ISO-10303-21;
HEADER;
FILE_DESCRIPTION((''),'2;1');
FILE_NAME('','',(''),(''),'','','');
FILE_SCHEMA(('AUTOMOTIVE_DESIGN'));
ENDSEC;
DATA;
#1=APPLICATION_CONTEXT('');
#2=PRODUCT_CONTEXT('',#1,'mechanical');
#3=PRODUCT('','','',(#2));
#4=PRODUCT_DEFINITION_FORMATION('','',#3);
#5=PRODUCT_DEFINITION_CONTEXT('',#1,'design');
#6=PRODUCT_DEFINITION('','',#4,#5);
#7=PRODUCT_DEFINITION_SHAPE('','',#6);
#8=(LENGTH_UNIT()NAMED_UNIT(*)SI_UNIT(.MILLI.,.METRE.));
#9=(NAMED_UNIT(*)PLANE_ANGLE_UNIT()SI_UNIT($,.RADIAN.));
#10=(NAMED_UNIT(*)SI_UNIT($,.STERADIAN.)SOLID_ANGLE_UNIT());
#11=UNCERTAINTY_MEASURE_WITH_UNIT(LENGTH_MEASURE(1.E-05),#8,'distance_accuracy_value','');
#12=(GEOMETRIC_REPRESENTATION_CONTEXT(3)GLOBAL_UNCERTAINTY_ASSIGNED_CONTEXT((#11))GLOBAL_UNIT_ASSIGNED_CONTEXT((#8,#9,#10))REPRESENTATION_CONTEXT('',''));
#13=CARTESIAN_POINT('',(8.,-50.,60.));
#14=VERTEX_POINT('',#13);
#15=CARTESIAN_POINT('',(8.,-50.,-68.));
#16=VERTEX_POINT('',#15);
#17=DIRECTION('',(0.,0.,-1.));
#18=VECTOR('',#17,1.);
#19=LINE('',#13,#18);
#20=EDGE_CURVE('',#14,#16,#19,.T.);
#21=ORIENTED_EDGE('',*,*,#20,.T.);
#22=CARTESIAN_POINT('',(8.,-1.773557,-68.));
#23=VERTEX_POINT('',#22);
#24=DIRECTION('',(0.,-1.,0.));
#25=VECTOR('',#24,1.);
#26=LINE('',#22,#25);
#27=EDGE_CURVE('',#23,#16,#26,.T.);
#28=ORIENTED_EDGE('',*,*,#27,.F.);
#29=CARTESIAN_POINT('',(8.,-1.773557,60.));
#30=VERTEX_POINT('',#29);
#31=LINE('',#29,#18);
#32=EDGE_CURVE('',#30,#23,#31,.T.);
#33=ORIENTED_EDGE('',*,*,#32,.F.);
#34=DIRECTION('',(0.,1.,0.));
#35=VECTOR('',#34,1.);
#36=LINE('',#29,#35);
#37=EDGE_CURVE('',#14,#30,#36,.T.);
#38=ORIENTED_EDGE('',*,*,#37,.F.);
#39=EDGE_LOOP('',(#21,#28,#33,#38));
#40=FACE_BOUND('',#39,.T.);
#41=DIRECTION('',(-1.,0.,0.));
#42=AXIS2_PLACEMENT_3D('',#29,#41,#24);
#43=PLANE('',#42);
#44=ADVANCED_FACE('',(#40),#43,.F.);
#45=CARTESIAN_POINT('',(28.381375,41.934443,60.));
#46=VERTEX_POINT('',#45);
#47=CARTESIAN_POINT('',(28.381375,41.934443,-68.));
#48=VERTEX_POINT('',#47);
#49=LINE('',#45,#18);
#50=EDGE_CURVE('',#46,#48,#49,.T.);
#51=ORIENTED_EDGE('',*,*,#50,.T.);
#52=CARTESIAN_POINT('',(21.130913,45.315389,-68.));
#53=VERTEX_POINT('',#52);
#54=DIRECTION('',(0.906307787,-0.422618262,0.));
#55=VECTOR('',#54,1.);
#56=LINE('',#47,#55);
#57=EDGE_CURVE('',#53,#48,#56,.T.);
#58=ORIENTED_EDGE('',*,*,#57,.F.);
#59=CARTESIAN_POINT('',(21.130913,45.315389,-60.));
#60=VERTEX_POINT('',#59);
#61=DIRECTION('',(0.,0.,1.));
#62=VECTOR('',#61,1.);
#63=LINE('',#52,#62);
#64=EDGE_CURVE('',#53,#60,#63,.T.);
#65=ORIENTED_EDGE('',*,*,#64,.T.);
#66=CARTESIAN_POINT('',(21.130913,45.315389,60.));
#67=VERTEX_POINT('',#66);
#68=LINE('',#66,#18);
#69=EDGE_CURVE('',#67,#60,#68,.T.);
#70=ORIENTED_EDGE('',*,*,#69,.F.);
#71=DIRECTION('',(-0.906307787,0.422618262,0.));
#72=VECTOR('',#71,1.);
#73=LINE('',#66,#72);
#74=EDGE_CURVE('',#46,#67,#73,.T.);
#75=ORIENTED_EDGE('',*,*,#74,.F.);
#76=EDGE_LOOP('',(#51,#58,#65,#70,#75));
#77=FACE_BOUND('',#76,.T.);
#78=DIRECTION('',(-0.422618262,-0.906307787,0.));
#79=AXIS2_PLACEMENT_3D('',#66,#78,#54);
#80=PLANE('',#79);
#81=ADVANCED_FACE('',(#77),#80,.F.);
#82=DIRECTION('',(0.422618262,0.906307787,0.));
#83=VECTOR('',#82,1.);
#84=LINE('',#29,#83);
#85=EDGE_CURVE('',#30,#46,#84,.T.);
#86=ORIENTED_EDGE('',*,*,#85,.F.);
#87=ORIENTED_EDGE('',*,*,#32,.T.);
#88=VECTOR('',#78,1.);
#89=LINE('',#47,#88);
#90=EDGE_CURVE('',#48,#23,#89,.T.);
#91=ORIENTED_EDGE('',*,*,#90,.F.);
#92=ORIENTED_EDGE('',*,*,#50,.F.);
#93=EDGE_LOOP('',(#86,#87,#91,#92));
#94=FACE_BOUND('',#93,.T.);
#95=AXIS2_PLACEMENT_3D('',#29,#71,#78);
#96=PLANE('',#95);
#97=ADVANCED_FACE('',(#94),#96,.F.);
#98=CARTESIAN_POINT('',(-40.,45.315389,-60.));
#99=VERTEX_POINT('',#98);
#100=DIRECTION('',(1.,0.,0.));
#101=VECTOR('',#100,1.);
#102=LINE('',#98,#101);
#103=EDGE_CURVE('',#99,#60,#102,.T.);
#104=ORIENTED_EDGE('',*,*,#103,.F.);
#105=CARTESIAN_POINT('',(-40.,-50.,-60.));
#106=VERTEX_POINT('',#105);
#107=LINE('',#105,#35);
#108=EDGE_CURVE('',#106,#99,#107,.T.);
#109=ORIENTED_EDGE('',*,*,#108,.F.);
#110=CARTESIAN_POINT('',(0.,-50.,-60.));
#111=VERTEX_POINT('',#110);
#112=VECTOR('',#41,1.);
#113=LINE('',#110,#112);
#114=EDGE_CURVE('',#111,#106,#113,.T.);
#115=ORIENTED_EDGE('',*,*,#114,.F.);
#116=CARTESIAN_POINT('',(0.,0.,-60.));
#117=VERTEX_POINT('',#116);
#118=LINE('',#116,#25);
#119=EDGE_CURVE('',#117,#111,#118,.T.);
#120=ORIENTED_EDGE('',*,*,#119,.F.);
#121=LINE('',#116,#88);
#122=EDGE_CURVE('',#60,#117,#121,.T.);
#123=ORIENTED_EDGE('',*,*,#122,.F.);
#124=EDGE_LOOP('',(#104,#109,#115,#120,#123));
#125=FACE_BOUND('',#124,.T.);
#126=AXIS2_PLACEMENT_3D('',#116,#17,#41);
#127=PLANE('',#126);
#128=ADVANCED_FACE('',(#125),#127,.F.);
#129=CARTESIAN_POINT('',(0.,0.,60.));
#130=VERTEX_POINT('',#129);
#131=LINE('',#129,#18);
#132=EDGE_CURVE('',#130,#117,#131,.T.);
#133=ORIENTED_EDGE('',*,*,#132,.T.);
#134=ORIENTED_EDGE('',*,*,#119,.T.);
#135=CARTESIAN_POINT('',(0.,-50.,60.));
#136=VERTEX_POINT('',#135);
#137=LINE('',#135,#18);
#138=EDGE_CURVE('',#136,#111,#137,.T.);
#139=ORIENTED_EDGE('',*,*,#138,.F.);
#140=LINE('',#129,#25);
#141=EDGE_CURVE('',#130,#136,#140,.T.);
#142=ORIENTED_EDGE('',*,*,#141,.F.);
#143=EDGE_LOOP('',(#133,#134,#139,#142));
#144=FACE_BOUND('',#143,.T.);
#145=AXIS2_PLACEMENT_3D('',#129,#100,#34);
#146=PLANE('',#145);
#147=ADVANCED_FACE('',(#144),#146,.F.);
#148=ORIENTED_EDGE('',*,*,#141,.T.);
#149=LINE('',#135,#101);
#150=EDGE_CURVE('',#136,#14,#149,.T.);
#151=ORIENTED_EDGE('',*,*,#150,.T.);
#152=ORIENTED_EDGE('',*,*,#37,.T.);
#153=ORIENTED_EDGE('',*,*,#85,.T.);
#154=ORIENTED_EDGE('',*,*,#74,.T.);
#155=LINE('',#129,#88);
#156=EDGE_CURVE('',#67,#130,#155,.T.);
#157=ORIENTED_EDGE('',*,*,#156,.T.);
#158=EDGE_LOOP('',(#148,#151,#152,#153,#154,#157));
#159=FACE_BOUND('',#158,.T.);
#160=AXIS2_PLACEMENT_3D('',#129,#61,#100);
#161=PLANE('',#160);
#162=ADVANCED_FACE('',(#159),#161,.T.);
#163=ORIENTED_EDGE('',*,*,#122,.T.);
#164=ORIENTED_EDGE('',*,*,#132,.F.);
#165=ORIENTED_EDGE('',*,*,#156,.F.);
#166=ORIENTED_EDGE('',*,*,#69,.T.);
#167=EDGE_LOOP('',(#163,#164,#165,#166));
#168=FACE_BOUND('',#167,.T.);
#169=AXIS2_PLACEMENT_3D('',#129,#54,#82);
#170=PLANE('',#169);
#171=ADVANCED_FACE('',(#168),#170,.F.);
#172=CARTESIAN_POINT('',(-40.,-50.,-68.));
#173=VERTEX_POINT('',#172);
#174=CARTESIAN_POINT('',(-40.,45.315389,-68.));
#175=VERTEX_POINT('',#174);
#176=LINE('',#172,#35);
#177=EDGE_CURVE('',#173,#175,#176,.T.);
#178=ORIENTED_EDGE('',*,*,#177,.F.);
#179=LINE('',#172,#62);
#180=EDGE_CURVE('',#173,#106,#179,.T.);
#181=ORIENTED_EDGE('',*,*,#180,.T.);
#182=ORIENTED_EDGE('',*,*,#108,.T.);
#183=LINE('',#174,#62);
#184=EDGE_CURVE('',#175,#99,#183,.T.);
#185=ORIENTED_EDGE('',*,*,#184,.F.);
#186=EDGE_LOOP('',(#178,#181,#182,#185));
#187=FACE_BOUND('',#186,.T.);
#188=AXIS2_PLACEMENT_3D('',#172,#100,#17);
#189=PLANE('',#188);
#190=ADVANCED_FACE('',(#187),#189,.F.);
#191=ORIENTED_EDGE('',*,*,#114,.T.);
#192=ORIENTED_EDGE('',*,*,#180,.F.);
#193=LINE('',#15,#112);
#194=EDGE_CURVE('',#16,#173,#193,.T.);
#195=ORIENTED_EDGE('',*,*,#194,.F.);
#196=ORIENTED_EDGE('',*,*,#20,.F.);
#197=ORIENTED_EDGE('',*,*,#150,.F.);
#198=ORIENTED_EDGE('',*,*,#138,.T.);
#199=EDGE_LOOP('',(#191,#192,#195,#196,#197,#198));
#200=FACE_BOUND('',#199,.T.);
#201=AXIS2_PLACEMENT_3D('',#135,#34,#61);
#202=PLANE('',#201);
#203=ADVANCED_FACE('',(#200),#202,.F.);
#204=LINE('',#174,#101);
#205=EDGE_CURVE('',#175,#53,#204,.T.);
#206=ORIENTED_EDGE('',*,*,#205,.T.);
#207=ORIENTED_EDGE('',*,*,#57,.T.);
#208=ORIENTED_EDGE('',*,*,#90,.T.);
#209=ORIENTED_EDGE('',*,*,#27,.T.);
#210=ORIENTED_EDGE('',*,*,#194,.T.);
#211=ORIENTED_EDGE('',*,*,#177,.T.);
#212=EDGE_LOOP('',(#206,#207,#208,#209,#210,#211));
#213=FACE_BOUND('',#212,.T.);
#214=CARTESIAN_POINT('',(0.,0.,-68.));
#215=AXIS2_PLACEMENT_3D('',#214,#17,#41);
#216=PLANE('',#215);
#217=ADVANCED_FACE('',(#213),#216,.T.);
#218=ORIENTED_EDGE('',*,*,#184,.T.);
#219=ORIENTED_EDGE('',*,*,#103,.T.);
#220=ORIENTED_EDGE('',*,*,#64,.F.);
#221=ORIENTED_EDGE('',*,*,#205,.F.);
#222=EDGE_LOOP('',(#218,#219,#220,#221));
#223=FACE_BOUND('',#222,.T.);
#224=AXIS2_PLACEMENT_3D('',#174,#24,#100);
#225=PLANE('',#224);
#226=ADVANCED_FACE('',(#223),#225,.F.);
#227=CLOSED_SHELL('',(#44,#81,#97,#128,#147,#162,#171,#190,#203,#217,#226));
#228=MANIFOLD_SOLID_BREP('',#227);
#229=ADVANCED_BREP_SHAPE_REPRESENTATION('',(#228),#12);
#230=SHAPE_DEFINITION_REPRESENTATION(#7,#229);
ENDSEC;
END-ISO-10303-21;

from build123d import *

# Parameters (mm, degrees)
BRKT_4_5_BOSS_EXTRUDE1_START = -60
BRKT_4_5_BOSS_EXTRUDE1_DEPTH = 120
BOSS_EXTRUDE1_DEPTH          = 8


# Read off the part's stored shape, not the designer's step: <BRKT_4_5>-<Boss-Extrude1>
with BuildPart() as part:
    # <BRKT_4_5>-<Boss-Extrude1> outline → <BRKT_4_5>-<Boss-Extrude1> (new body)
    with BuildSketch(Plane.XY.offset(BRKT_4_5_BOSS_EXTRUDE1_START)):
        Polygon((0, 0), (0, -50), (8, -50), (8, -1.773557301), (28.381375383, 41.934443258), (21.130913087, 45.315389352), align=None)
    extrude(amount=BRKT_4_5_BOSS_EXTRUDE1_DEPTH)

    # Sketch1 → Boss-Extrude1 (add)
    with BuildSketch(Plane(origin=(0, 0, -60), x_dir=(-1, 0, 0), z_dir=(0, 0, -1))):
        Polygon((-28.381375383, 41.934443258), (-21.130913087, 45.315389352), (40, 45.315389352), (40, -50), (0, -50), (-8, -50), (-8, -1.773557301), align=None)
    extrude(amount=BOSS_EXTRUDE1_DEPTH)


solid = part.part
